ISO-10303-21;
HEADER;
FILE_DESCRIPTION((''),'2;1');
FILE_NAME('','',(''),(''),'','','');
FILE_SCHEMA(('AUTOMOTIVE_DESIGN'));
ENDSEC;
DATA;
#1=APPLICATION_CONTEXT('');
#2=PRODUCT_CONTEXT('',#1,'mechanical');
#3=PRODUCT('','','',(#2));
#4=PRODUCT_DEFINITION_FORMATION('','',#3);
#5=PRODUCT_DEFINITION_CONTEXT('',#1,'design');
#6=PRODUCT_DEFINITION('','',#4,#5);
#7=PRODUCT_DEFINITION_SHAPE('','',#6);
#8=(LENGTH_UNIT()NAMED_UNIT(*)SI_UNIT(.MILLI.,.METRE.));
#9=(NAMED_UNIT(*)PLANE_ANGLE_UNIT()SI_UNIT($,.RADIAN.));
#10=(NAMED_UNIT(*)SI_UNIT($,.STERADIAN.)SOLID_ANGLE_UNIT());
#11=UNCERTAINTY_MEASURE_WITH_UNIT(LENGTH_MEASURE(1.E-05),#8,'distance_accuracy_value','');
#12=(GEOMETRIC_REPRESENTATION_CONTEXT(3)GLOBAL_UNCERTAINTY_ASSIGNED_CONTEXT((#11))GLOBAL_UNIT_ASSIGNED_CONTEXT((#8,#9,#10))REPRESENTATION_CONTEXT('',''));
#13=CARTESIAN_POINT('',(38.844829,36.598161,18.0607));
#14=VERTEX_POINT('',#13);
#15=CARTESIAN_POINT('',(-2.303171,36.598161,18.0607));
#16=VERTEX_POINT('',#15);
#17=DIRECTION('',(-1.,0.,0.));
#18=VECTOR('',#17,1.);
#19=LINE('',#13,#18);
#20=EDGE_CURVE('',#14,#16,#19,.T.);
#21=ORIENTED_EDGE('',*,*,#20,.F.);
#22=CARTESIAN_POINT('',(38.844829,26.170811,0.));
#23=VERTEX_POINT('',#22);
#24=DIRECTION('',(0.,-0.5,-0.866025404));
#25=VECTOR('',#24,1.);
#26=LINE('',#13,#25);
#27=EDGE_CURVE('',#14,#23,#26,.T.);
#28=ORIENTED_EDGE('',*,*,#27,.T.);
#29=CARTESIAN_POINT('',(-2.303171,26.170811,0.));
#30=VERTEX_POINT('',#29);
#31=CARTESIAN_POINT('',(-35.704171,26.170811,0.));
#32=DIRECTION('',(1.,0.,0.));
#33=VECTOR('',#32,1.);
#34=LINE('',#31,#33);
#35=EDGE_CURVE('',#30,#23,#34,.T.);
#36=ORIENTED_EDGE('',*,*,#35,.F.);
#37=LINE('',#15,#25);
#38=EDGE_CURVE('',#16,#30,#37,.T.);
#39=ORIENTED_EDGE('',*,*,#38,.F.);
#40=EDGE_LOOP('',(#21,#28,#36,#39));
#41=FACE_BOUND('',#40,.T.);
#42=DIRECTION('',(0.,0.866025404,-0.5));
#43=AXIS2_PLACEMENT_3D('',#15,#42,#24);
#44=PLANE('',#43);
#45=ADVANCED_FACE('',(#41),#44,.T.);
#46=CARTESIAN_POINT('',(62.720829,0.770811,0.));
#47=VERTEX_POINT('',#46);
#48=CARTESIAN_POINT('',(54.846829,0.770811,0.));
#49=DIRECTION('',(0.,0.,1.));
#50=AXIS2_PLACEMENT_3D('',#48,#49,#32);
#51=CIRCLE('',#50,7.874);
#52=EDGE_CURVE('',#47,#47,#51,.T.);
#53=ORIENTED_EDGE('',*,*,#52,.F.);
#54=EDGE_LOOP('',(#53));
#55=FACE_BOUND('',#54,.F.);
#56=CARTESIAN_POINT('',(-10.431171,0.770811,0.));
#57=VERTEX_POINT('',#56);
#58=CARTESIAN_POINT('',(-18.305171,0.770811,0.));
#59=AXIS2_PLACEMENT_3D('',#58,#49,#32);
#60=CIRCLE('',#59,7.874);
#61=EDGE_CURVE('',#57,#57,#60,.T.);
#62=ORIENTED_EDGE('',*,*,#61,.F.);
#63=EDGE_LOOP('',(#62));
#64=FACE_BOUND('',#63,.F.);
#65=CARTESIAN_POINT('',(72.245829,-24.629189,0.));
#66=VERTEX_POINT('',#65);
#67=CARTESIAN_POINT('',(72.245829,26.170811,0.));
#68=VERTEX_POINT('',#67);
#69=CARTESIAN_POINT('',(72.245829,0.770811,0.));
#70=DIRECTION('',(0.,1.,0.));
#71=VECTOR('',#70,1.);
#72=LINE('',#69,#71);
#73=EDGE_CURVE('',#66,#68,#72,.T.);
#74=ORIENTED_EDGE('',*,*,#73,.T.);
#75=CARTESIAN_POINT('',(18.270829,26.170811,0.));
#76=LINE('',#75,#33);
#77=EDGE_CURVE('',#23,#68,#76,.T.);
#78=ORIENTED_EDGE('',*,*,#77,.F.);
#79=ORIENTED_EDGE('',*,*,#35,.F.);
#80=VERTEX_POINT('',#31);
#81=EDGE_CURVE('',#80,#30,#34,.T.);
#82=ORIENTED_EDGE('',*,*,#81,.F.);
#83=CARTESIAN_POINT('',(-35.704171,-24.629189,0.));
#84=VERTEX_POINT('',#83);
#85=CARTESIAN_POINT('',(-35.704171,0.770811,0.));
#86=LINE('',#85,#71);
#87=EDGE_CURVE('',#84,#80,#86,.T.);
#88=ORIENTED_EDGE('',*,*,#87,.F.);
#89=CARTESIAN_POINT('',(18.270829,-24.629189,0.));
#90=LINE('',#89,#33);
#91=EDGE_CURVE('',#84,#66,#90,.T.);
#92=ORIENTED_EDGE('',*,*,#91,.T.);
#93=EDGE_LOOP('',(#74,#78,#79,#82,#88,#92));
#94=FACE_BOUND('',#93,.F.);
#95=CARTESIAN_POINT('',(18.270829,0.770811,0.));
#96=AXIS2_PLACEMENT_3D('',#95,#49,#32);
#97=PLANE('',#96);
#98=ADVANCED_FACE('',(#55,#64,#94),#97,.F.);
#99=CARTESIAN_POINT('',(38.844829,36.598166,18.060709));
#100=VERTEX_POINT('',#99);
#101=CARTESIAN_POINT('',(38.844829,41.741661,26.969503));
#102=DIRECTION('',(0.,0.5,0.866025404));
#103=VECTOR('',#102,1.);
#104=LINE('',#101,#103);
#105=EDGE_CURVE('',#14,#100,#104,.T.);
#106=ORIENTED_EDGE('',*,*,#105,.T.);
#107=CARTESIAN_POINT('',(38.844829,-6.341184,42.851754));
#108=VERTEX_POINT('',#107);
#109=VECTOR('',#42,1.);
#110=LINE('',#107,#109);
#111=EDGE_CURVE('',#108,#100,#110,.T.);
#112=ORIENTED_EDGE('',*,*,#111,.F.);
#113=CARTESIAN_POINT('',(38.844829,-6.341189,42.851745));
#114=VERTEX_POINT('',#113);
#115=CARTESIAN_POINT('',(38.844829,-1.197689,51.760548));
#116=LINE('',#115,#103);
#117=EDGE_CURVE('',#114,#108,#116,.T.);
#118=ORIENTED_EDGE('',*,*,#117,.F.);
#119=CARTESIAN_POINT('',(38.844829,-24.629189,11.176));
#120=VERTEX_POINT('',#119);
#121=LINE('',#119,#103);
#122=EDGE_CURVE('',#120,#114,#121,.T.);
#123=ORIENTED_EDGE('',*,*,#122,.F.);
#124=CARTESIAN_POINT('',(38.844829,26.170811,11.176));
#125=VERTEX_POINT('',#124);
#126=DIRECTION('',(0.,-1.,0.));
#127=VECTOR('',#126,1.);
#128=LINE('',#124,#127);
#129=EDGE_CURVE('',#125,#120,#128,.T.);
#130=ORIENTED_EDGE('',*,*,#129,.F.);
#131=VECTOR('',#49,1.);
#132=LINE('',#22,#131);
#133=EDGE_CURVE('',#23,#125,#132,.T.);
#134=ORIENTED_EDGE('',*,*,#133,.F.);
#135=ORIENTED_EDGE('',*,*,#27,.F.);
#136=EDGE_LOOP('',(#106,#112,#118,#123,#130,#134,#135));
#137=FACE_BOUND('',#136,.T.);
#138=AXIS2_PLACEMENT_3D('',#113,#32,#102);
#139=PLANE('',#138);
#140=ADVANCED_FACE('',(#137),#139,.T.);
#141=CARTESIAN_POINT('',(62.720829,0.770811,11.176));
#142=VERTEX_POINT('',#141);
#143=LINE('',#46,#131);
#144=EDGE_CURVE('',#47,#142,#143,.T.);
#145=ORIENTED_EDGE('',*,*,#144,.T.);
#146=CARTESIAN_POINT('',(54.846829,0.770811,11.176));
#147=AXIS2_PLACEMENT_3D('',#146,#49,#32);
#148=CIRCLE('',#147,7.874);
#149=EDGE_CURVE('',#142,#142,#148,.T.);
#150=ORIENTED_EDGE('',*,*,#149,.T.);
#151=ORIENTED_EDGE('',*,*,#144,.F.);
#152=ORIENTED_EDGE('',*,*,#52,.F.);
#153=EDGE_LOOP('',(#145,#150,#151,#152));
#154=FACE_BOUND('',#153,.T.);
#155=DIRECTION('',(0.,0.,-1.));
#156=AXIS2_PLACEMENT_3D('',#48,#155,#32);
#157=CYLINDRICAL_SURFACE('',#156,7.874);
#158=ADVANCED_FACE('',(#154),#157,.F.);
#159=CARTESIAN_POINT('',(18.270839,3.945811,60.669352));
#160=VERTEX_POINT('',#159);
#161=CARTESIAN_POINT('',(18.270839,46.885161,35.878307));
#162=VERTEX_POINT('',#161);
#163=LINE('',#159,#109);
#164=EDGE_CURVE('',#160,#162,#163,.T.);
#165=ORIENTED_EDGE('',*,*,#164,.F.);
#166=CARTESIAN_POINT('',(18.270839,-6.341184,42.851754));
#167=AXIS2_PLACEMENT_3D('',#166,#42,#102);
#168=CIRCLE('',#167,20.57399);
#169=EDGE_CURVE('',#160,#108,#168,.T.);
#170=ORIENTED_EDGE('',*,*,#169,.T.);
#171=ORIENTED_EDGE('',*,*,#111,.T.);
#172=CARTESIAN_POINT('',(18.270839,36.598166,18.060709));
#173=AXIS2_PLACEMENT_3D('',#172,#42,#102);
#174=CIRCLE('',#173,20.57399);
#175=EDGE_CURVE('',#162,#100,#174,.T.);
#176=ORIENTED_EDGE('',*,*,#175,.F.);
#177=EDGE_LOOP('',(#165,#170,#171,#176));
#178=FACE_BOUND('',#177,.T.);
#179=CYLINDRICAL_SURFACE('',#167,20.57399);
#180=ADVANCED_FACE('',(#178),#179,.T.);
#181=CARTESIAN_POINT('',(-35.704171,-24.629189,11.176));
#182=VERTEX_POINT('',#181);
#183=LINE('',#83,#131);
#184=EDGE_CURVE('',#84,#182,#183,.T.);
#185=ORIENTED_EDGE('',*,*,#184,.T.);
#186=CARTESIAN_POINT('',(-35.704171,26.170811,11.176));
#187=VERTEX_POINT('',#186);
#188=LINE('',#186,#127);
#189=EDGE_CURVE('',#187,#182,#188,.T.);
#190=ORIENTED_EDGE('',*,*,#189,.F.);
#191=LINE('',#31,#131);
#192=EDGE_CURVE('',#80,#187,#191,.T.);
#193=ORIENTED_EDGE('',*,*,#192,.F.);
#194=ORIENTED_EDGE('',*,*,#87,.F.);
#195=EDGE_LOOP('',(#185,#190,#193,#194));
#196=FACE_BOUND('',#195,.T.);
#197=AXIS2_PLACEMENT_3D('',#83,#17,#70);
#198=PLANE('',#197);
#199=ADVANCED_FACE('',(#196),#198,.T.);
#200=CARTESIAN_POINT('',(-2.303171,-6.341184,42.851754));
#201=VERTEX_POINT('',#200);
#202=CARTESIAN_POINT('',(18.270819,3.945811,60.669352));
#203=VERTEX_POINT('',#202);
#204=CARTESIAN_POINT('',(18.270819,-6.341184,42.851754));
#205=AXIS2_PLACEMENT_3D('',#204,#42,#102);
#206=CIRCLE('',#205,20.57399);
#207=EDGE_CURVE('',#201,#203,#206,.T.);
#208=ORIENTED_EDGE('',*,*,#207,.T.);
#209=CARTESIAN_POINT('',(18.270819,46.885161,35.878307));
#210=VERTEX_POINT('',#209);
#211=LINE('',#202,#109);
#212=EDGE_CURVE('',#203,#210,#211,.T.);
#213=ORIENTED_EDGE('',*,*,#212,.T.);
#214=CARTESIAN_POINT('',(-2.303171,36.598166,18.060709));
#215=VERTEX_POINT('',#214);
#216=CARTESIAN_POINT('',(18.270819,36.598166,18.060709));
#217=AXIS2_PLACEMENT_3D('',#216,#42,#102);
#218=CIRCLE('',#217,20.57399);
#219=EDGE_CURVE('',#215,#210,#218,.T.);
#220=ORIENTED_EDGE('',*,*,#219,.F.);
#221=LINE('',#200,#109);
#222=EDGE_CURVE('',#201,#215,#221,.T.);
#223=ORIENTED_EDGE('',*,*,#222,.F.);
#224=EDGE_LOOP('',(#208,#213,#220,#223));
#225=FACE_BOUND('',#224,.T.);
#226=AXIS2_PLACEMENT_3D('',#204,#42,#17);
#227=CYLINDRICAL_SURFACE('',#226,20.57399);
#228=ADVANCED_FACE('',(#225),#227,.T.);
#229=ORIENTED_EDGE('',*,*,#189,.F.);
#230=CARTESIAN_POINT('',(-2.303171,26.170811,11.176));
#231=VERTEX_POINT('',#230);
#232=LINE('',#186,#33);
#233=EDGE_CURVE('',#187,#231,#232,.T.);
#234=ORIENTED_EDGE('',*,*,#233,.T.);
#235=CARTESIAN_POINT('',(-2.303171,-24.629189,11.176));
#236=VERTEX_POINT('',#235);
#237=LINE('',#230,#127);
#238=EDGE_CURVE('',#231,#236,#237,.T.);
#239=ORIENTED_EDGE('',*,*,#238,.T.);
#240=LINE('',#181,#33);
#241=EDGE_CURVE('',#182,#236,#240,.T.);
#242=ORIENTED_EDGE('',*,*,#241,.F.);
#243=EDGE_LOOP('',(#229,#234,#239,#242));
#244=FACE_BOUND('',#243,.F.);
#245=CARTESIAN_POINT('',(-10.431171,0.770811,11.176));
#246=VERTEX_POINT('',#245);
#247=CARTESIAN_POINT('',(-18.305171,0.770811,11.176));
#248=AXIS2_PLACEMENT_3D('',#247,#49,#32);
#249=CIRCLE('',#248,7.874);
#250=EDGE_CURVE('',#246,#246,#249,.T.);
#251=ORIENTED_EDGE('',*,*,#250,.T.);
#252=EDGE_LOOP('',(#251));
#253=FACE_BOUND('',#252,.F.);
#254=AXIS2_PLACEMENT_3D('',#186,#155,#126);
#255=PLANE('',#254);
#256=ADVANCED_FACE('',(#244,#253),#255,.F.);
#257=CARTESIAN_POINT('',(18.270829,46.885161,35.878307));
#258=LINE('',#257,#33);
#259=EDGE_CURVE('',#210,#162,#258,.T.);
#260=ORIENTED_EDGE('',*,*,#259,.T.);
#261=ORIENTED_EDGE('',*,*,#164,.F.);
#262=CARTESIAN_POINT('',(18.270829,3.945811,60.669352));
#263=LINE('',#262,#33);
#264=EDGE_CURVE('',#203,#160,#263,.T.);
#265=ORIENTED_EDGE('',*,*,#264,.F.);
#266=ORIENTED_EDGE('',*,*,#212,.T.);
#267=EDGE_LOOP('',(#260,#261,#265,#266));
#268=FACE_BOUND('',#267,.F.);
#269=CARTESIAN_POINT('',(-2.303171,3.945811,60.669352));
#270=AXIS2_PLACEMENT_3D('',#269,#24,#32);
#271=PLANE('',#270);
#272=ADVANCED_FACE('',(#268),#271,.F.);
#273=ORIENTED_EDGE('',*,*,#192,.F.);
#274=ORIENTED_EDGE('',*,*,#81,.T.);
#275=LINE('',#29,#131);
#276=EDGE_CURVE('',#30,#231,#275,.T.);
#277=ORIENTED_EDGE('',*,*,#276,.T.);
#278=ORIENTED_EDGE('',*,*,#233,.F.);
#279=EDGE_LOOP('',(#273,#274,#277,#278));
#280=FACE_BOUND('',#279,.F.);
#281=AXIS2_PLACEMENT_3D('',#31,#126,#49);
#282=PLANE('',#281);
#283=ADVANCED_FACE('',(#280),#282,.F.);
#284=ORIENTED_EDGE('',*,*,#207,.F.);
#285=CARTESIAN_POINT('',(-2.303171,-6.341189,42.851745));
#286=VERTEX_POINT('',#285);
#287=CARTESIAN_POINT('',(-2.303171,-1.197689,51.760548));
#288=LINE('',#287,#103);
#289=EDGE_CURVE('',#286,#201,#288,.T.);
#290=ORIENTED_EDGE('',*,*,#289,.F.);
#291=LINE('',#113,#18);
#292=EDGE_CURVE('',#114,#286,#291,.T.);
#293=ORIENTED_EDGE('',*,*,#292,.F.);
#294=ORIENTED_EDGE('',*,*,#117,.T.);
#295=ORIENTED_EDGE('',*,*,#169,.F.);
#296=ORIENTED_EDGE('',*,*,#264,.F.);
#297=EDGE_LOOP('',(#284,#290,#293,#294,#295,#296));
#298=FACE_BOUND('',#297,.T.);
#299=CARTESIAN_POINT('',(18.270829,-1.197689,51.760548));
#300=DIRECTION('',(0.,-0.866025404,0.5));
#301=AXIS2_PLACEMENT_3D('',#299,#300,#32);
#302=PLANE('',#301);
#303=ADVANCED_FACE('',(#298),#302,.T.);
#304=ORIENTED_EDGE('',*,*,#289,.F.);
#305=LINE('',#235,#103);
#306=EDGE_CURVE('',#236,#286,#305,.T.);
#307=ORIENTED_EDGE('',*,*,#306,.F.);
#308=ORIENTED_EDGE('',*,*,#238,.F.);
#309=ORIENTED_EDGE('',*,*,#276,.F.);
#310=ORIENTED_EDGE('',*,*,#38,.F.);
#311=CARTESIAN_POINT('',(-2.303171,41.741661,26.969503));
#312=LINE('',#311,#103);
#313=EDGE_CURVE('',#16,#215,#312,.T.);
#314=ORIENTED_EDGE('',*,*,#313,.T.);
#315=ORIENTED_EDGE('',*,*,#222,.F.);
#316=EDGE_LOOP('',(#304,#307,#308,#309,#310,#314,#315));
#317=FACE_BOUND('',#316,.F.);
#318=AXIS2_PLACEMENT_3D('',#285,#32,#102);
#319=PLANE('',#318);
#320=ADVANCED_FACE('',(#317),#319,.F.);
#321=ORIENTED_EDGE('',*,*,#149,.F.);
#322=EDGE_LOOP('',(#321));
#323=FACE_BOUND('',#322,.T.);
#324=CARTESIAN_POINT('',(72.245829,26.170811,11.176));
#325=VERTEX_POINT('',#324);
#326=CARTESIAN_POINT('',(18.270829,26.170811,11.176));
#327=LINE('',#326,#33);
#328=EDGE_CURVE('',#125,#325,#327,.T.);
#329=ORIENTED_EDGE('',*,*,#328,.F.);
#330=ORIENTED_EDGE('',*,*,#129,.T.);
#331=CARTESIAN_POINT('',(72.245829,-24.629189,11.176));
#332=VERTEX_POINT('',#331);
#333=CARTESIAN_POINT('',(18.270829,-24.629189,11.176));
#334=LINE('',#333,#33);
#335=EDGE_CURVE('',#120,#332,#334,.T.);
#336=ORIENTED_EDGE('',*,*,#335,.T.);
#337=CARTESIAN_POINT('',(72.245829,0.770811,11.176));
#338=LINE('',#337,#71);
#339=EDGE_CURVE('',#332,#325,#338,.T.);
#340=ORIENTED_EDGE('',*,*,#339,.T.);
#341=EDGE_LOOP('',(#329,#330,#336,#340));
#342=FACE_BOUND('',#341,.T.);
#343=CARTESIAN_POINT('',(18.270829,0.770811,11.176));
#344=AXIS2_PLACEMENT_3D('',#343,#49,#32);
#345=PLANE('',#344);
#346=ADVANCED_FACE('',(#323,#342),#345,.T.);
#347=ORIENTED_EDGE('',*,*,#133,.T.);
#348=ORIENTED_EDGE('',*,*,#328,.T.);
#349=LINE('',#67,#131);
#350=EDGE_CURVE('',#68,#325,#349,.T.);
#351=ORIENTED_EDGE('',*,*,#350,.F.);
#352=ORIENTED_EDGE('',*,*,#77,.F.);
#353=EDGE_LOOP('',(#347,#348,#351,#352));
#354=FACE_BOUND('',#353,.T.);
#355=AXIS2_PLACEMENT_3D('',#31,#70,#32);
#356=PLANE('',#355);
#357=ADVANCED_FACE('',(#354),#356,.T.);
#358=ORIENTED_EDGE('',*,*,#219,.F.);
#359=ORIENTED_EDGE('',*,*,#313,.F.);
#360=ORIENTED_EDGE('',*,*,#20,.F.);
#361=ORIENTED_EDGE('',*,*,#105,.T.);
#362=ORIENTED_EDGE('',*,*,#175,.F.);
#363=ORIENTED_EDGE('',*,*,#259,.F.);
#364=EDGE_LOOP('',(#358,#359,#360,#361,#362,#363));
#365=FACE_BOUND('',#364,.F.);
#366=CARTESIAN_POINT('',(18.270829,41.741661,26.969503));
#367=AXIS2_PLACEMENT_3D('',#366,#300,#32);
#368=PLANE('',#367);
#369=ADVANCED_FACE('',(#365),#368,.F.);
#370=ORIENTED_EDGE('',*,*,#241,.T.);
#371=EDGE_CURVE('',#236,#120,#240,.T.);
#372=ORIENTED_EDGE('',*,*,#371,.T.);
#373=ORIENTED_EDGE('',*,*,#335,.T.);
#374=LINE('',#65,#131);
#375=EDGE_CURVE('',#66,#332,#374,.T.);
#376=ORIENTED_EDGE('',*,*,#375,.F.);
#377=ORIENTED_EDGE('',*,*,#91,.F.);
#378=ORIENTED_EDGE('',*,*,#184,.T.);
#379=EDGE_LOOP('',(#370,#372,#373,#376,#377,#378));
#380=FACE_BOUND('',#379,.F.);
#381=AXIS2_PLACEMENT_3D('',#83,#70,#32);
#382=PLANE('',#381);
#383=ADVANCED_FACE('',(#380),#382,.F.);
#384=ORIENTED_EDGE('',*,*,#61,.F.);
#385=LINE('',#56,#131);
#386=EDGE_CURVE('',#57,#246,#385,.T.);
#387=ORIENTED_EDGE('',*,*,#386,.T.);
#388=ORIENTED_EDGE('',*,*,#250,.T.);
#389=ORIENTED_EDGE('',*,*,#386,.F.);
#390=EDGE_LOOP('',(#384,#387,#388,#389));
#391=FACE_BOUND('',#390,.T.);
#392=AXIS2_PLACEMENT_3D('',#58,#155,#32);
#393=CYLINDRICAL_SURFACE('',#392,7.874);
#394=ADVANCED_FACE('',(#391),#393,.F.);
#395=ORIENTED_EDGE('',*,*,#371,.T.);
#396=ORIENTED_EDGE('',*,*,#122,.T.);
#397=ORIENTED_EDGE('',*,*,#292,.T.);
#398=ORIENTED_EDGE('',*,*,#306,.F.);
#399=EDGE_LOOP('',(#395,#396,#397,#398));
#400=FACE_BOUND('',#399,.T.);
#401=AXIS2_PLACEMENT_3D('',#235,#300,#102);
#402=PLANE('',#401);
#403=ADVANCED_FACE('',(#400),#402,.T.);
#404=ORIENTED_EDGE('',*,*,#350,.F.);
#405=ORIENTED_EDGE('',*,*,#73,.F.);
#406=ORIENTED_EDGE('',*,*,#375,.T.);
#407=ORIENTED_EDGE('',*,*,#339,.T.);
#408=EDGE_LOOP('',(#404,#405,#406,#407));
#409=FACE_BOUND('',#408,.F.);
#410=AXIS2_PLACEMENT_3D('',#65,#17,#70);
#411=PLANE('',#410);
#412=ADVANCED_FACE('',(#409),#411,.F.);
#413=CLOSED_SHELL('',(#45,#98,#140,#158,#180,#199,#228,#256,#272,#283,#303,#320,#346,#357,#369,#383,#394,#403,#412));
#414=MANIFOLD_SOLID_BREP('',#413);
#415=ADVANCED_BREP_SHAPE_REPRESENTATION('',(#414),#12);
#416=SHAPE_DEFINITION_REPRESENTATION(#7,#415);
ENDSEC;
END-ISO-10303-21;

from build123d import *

# Parameters (mm, degrees)
F0_W     = 107.95
F0_H     = 50.8
F0_R     = 7.874
F1_DEPTH = 11.176
F3_DEPTH = 33.401
F4_DEPTH = 41.148
F5_DEPTH = 33.401
F6_W     = 41.148
F6_H     = 20.574
F7_DEPTH = 49.5820905122
F8_R     = 20.57399


# Not quite as in the source:
# - a fillet or chamfer is up to 0.001 mm smaller than in the source, because OpenCascade refuses the exact size


with BuildPart() as f1:
    # F0 (on Top) → F1 (new body)
    with BuildSketch(Plane.XY):
        with Locations((18.2708286419, 0.7708109915)):
            Rectangle(F0_W, F0_H)
        with Locations((-18.3051713581, 0.7708109915)):
            Circle(F0_R, mode=Mode.SUBTRACT)
        with Locations((54.8468286419, 0.7708109915)):
            Circle(F0_R, mode=Mode.SUBTRACT)
    extrude(amount=F1_DEPTH)



with BuildPart() as f3:
    # F2 (on face) → F3 (new body)
    with BuildSketch(Plane(origin=(-35.7041713581, 0, 0), x_dir=(0, -1, 0), z_dir=(-1, 0, 0))):
        Polygon((-26.1708109915, 11.176), (24.6291890085, 11.176), (6.3411890085, 42.8517451688), (-36.5981609479, 18.0606999127), (-26.1708109915, 0), align=None)
    extrude(amount=-F3_DEPTH)


with BuildPart() as f1_1:
    add(f1.part)
    # F4 (add): a face of the model
    f4_faces = [f3.part.faces().sort_by_distance(p)[0] for p in [
        (-2.3031713581, 4.9580328492, 21.6795412193),
    ]]

    add(f3.part)  # F4 merges F3
    extrude(f4_faces, amount=F4_DEPTH)

    # F2 (on face) → F5 (cut)
    with BuildSketch(Plane(origin=(-35.7041713581, 0, 0), x_dir=(0, -1, 0), z_dir=(-1, 0, 0))):
        Polygon((-26.1708109915, 11.176), (24.6291890085, 11.176), (6.3411890085, 42.8517451688), (-36.5981609479, 18.0606999127), (-26.1708109915, 0), align=None)
    extrude(amount=-F5_DEPTH, mode=Mode.SUBTRACT)

    # F6 (on face) → F7 (join, through all)
    with BuildSketch(Plane(origin=(0, -23.3112417127, 13.458751678), x_dir=(1, 0, 0), z_dir=(0, -0.8660254038, 0.5))):
        with Locations((18.2708286419, 44.2271054085)):
            Rectangle(F6_W, F6_H)
    extrude(amount=-F7_DEPTH)

    # F8 (radius 20.574 in the source; OpenCascade refuses exactly that, so slightly less here)
    f8_edges = [f1_1.edges().sort_by_distance(p)[0] for p in [
        (38.844829, 25.415486, 48.273829),
        (-2.303171, 25.415486, 48.273829),
    ]]
    fillet(f8_edges, radius=F8_R)


solid = f1_1.part
